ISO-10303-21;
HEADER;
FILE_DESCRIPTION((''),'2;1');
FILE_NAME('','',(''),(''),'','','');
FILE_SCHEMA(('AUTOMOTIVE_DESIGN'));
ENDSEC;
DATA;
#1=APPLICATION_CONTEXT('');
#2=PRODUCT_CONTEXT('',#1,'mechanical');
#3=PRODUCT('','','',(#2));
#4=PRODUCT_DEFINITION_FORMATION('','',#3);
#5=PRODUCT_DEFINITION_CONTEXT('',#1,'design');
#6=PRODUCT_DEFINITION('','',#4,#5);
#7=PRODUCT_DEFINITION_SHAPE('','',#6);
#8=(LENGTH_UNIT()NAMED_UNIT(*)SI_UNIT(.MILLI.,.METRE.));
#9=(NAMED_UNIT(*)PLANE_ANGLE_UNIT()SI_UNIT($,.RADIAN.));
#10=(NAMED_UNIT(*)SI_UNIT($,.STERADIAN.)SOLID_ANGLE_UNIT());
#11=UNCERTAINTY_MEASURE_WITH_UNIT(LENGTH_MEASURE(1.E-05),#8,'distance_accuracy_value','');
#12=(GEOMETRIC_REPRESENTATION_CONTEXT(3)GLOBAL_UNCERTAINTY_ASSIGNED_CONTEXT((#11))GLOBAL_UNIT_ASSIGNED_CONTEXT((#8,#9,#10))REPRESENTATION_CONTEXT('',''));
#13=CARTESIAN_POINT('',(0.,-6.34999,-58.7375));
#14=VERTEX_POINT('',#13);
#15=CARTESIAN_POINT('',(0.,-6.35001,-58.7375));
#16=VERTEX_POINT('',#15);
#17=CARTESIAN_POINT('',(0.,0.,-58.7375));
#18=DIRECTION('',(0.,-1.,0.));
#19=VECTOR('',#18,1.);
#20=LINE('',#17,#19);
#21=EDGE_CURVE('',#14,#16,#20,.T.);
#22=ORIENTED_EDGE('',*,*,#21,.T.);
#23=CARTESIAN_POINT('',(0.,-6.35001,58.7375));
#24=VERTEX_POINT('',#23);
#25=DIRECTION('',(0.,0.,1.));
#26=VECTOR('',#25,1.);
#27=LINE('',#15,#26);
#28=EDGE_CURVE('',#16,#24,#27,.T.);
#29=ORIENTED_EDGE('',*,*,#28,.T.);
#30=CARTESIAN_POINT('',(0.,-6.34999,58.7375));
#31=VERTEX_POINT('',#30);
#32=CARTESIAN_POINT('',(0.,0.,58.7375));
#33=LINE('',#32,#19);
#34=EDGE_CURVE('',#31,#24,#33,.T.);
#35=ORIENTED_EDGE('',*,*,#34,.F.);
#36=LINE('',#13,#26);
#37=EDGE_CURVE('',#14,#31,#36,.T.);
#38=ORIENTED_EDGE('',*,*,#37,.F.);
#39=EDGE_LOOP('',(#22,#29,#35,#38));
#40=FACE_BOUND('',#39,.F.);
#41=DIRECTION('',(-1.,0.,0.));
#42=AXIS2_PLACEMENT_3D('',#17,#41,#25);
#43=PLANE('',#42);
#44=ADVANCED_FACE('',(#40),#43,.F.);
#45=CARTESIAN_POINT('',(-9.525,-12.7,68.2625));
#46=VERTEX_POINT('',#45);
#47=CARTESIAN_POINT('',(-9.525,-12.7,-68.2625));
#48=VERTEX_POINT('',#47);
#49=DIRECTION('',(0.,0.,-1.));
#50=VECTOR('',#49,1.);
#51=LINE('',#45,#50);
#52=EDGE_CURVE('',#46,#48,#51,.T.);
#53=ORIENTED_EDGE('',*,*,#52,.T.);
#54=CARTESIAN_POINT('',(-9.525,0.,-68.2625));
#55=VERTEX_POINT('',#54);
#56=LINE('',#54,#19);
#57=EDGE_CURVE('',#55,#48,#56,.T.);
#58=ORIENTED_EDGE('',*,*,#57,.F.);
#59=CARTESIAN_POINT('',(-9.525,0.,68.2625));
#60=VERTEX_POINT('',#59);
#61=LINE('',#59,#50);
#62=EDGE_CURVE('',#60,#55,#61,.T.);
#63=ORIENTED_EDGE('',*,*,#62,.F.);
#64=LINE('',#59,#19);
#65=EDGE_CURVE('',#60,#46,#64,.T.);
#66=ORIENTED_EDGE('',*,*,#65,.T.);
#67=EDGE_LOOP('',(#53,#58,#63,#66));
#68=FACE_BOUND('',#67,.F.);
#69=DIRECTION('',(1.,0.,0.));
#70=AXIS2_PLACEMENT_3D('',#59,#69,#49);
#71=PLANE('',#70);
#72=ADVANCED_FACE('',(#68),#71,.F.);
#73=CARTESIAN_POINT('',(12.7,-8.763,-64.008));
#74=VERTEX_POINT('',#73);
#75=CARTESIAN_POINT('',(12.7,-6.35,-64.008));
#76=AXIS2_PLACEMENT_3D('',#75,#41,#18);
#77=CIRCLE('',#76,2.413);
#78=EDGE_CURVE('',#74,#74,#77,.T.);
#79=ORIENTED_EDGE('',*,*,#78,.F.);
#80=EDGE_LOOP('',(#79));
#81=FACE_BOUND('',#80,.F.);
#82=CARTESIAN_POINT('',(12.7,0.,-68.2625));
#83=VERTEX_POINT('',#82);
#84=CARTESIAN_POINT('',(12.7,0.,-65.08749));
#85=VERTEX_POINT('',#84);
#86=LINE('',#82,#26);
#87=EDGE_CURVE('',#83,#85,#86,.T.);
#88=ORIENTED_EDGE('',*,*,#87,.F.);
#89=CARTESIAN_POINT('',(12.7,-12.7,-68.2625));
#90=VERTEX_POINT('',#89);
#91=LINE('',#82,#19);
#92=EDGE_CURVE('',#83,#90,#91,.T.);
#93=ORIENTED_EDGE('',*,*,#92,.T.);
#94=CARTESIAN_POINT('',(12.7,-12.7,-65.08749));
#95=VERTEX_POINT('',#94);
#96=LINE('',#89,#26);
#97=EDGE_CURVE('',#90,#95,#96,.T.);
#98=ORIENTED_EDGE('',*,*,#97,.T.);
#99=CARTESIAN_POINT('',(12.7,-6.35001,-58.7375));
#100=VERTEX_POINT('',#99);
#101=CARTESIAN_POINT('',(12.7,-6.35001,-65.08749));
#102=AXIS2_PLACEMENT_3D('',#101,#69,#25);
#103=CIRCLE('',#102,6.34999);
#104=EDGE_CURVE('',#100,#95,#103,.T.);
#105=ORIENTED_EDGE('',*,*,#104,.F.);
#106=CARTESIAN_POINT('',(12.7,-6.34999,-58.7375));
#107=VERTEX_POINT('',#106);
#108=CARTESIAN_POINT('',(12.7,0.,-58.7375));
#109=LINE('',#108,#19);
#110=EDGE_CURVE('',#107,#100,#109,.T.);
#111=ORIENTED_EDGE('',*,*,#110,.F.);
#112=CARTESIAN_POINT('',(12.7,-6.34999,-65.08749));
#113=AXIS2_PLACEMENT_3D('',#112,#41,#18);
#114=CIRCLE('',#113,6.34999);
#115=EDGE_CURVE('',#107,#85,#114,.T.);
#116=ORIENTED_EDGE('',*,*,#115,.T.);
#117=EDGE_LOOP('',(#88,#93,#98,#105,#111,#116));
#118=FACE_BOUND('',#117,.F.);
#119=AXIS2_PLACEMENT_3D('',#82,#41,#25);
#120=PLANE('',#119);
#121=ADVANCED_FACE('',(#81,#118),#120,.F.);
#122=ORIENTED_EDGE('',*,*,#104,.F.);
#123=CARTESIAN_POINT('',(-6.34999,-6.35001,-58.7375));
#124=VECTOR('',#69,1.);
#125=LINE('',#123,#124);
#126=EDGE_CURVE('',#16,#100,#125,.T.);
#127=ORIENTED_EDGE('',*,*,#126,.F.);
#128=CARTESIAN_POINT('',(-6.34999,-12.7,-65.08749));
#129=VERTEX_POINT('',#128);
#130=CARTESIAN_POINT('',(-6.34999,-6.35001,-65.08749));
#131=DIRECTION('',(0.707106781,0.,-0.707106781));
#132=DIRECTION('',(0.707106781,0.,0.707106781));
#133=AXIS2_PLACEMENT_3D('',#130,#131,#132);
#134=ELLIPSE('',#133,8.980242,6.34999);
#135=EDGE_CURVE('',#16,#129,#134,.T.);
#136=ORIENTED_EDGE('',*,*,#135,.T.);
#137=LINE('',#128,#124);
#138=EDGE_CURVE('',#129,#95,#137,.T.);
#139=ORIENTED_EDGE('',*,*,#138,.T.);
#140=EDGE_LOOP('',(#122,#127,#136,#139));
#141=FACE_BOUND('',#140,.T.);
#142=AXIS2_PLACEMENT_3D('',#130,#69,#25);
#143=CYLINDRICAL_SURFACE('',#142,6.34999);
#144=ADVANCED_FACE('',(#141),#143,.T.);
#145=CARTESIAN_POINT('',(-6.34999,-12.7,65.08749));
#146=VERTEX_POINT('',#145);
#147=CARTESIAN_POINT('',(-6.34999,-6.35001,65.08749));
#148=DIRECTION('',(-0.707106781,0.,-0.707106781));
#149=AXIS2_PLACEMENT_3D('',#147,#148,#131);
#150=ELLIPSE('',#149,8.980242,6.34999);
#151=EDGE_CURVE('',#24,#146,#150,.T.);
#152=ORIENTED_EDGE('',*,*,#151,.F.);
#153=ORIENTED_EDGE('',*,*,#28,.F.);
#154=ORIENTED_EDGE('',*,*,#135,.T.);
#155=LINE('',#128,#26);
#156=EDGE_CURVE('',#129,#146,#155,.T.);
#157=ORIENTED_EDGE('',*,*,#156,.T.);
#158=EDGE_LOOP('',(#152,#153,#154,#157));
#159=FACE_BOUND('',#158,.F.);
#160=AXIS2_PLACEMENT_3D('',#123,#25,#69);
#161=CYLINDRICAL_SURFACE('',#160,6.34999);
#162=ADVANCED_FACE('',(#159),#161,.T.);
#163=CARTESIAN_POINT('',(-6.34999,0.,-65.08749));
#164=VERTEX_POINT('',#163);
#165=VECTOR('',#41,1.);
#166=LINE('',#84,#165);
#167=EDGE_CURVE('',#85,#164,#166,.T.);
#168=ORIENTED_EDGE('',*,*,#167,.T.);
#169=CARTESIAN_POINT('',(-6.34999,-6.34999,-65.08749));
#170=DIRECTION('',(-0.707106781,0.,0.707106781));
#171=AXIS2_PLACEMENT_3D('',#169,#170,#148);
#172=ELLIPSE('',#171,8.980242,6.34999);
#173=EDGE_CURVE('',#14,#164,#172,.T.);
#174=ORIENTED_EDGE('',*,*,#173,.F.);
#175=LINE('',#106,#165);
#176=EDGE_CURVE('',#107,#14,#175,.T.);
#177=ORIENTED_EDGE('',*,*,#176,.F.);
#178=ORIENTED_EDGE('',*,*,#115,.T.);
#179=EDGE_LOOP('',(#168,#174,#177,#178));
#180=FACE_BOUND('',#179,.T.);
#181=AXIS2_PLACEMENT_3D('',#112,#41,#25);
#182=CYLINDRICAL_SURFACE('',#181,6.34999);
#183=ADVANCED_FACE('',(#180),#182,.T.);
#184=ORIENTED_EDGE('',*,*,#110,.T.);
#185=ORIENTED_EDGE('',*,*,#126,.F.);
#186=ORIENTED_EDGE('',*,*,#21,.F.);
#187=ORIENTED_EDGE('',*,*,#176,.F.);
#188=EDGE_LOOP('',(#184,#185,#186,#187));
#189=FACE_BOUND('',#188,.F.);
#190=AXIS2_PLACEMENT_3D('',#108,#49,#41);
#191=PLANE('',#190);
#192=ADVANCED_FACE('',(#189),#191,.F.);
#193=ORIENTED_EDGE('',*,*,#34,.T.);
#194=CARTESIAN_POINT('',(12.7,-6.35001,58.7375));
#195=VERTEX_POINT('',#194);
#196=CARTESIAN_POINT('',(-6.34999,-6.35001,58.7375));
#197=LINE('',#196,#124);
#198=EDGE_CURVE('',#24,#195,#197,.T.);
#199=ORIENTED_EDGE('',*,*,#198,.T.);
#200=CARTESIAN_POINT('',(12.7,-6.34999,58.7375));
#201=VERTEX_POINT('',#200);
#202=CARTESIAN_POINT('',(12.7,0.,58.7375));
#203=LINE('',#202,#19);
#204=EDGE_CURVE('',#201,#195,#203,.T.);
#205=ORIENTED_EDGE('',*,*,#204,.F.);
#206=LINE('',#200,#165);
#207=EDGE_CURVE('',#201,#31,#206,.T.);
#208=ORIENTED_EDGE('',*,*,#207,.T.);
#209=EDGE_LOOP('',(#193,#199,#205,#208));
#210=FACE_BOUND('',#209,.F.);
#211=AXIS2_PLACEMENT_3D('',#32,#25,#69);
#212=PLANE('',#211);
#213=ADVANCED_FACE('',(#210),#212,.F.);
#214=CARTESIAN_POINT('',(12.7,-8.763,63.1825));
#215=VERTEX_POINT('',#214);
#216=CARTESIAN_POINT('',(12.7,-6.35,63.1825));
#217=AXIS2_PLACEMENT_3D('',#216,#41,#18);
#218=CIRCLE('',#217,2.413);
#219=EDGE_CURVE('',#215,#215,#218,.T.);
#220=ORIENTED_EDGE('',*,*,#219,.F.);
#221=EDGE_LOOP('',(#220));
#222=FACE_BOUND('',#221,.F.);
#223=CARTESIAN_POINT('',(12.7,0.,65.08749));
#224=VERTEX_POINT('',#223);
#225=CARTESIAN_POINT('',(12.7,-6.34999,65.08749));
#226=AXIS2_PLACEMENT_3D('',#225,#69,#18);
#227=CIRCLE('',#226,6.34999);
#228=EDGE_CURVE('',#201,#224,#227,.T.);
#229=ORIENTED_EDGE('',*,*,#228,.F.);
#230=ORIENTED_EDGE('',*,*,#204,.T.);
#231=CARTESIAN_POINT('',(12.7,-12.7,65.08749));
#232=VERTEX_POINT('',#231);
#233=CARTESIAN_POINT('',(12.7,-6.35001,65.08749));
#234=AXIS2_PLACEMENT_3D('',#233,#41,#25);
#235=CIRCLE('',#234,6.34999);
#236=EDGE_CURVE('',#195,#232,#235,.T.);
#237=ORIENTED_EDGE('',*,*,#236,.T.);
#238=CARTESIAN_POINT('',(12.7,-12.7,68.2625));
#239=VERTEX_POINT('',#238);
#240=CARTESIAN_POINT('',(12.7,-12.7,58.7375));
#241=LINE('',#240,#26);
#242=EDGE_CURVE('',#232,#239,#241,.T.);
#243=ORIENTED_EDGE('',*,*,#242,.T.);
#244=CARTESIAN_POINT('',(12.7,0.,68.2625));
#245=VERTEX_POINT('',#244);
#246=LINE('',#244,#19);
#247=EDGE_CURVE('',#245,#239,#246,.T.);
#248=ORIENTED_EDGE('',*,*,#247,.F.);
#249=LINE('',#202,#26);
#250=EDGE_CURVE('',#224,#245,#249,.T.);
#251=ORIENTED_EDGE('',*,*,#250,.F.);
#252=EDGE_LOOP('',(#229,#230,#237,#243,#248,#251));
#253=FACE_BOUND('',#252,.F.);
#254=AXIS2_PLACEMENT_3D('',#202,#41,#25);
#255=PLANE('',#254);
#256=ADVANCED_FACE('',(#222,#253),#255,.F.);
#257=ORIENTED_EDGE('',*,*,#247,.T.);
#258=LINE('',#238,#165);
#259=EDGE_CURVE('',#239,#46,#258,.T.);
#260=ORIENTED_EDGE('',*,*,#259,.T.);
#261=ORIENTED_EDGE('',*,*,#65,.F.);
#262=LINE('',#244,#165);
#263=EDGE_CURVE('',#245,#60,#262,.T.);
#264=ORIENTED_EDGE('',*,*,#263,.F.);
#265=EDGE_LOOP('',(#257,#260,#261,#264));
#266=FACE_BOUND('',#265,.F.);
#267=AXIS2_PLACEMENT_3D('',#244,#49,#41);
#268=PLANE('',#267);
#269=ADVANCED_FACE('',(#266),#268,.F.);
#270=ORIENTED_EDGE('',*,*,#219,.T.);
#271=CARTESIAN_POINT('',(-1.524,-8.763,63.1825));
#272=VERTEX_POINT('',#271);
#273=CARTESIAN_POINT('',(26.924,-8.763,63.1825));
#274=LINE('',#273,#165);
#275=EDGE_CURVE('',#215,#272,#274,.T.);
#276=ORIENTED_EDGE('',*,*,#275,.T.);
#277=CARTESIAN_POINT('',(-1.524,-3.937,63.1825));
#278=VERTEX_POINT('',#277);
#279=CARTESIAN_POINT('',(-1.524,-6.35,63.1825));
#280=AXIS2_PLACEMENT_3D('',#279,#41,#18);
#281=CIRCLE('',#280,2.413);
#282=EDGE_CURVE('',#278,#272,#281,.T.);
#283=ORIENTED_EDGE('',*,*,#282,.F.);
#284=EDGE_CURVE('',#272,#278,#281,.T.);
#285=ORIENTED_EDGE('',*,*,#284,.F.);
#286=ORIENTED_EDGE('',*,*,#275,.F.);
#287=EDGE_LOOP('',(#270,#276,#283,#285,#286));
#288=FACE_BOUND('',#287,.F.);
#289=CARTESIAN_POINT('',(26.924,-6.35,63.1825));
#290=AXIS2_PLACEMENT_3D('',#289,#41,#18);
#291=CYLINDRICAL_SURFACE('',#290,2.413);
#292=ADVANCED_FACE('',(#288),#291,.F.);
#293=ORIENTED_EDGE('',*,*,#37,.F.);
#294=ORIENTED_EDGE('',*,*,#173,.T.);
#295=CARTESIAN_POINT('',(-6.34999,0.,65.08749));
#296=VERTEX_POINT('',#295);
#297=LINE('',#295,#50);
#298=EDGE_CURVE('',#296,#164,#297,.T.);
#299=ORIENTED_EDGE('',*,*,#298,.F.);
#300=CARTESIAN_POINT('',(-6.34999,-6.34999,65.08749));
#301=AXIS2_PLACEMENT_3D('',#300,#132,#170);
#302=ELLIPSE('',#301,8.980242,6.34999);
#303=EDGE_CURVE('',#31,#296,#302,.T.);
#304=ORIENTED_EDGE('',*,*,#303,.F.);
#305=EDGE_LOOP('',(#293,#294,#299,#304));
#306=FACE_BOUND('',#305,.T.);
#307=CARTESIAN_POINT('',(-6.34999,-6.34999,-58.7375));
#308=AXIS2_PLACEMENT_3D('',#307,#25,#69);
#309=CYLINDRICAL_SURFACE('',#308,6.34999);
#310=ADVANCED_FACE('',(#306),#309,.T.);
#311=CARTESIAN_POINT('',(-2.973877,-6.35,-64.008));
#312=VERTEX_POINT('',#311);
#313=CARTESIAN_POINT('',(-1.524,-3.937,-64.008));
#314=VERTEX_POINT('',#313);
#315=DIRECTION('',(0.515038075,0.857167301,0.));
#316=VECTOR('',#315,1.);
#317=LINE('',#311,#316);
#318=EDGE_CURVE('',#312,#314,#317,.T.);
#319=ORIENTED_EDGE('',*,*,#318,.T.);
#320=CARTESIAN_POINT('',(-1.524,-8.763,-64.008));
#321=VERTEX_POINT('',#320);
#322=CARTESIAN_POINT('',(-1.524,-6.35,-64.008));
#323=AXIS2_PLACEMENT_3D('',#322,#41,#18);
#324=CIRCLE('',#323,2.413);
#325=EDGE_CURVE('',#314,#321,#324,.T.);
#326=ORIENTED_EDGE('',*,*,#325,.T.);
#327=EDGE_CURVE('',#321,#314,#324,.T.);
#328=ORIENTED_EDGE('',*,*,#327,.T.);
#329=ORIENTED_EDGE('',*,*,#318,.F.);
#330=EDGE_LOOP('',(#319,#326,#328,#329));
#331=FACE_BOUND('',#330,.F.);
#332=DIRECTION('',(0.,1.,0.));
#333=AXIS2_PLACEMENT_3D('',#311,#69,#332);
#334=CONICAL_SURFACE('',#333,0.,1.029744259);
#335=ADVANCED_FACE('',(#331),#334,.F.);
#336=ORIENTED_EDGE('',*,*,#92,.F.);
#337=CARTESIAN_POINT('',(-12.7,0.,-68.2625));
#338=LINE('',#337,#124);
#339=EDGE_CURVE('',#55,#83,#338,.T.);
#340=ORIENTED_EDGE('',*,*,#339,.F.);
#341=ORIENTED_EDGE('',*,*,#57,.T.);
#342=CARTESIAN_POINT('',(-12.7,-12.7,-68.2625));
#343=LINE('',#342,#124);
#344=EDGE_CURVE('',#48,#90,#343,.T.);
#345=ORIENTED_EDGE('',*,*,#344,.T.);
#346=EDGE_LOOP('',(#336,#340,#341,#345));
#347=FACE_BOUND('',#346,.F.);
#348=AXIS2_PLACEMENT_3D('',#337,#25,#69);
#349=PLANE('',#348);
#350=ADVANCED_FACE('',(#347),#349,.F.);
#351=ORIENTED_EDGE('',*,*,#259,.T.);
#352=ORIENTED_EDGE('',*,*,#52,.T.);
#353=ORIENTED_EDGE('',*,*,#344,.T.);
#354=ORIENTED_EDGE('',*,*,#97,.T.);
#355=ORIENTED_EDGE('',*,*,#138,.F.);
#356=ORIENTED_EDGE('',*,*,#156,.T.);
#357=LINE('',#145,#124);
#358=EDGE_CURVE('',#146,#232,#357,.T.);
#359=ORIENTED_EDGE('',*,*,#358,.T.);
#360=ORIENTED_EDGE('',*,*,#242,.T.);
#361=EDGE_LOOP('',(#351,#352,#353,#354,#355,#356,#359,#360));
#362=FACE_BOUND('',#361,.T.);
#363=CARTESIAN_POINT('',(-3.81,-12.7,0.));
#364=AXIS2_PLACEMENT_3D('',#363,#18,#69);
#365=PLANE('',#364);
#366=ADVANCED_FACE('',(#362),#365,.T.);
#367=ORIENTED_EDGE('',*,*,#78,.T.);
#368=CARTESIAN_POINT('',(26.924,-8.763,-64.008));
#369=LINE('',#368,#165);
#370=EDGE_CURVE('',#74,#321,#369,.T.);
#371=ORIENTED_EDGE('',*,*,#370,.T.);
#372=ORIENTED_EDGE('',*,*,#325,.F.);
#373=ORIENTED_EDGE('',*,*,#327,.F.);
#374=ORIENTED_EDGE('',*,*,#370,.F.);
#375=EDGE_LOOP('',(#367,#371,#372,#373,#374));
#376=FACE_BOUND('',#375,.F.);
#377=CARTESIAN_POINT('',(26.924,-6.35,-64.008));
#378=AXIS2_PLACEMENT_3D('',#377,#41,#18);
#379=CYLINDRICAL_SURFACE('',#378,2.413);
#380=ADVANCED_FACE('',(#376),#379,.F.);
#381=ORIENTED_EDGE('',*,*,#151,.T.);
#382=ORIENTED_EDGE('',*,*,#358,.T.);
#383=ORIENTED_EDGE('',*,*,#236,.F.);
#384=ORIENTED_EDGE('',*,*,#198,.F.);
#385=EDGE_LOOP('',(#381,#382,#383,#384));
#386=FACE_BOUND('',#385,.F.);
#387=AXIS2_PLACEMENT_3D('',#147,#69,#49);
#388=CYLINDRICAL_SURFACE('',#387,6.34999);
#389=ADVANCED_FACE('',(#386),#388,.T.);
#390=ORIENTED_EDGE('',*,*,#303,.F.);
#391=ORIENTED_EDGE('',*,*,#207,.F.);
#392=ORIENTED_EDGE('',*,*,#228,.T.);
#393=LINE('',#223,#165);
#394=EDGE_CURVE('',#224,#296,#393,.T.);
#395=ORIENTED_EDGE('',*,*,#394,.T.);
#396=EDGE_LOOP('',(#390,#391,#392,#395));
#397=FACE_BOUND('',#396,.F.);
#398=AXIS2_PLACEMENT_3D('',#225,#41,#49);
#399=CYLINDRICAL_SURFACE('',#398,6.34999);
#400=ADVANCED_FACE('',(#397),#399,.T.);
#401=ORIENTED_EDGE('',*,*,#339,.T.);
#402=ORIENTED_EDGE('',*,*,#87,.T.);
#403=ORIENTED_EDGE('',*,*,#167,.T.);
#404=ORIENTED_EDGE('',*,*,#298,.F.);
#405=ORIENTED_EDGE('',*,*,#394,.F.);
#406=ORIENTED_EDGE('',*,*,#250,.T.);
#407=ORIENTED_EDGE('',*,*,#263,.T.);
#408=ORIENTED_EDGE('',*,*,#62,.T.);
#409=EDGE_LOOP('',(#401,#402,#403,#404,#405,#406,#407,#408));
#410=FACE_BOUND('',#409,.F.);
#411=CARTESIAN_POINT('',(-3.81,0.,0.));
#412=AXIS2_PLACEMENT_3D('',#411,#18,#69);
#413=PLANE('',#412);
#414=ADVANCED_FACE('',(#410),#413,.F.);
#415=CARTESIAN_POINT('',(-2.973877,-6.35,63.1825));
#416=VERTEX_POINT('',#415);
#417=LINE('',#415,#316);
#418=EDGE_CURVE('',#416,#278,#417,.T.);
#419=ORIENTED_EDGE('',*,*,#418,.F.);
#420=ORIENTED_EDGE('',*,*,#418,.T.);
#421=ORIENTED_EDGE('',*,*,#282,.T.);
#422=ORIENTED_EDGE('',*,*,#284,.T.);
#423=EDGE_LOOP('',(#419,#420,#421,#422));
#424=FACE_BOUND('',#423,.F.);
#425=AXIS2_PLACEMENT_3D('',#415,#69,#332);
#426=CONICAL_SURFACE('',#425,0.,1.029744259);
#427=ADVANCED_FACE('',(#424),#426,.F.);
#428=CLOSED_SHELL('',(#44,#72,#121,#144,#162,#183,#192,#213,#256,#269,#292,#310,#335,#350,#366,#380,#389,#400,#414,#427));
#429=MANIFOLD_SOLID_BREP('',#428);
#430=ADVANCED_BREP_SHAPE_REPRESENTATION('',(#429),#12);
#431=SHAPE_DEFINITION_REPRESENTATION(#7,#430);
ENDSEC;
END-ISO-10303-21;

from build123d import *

# Parameters (mm, degrees)
F1_DEPTH = 12.7
F2_R     = 6.34999
F3_R     = 6.34999
F4_DEPTH = 3.175
F6_D     = 4.826
F6_DEPTH = 14.224
F6_TIP   = 1.4498766737
F8_D     = 4.826
F8_DEPTH = 14.224
F8_TIP   = 1.4498766737


# Not quite as in the source:
# - a fillet or chamfer is up to 0.001 mm smaller than in the source, because OpenCascade refuses the exact size


with BuildPart() as f1:
    # F0 (on Front) → F1 (new body)
    with BuildSketch(Plane.XZ):
        Polygon((12.7, 64.008), (12.7, 68.2625), (-12.7, 68.2625), (-12.7, -68.2625), (12.7, -68.2625), (12.7, -64.008), (12.7, -58.7375), (0, -58.7375), (0, 58.7375), (12.7, 58.7375), align=None)
    extrude(amount=F1_DEPTH)

    # F2 (radius 6.35 in the source; OpenCascade refuses exactly that, so slightly less here)
    f2_edges = [f1.edges().sort_by_distance(p)[0] for p in [
        (0, -12.7, 0),
        (0, 0, 0),
    ]]
    fillet(f2_edges, radius=F2_R)

    # F3 (radius 6.35 in the source; OpenCascade refuses exactly that, so slightly less here)
    f3_edges = [f1.edges().sort_by_distance(p)[0] for p in [
        (6.35, -12.7, 58.7375),
        (6.35, 0, 58.7375),
        (6.35, -12.7, -58.7375),
        (6.35, 0, -58.7375),
    ]]
    fillet(f3_edges, radius=F3_R)

    # F4 (cut): a face of the model
    f4_faces = [f1.faces().sort_by_distance(p)[0] for p in [
        (-12.7, -6.35, 0),
    ]]
    extrude(f4_faces, amount=-F4_DEPTH, mode=Mode.SUBTRACT)

    # F6
    with Locations(Plane.YZ.offset(12.7)):
        with Locations((-6.35, 63.1825)):
            Hole(F6_D / 2, depth=F6_DEPTH)
            with Locations((0, 0, -(F6_DEPTH + F6_TIP / 2))):  # 118° drill point
                Cone(0, F6_D / 2, F6_TIP, mode=Mode.SUBTRACT)

    # F8
    with Locations(Plane.YZ.offset(12.7)):
        with Locations((-6.35, -64.008)):
            Hole(F8_D / 2, depth=F8_DEPTH)
            with Locations((0, 0, -(F8_DEPTH + F8_TIP / 2))):  # 118° drill point
                Cone(0, F8_D / 2, F8_TIP, mode=Mode.SUBTRACT)


solid = f1.part
